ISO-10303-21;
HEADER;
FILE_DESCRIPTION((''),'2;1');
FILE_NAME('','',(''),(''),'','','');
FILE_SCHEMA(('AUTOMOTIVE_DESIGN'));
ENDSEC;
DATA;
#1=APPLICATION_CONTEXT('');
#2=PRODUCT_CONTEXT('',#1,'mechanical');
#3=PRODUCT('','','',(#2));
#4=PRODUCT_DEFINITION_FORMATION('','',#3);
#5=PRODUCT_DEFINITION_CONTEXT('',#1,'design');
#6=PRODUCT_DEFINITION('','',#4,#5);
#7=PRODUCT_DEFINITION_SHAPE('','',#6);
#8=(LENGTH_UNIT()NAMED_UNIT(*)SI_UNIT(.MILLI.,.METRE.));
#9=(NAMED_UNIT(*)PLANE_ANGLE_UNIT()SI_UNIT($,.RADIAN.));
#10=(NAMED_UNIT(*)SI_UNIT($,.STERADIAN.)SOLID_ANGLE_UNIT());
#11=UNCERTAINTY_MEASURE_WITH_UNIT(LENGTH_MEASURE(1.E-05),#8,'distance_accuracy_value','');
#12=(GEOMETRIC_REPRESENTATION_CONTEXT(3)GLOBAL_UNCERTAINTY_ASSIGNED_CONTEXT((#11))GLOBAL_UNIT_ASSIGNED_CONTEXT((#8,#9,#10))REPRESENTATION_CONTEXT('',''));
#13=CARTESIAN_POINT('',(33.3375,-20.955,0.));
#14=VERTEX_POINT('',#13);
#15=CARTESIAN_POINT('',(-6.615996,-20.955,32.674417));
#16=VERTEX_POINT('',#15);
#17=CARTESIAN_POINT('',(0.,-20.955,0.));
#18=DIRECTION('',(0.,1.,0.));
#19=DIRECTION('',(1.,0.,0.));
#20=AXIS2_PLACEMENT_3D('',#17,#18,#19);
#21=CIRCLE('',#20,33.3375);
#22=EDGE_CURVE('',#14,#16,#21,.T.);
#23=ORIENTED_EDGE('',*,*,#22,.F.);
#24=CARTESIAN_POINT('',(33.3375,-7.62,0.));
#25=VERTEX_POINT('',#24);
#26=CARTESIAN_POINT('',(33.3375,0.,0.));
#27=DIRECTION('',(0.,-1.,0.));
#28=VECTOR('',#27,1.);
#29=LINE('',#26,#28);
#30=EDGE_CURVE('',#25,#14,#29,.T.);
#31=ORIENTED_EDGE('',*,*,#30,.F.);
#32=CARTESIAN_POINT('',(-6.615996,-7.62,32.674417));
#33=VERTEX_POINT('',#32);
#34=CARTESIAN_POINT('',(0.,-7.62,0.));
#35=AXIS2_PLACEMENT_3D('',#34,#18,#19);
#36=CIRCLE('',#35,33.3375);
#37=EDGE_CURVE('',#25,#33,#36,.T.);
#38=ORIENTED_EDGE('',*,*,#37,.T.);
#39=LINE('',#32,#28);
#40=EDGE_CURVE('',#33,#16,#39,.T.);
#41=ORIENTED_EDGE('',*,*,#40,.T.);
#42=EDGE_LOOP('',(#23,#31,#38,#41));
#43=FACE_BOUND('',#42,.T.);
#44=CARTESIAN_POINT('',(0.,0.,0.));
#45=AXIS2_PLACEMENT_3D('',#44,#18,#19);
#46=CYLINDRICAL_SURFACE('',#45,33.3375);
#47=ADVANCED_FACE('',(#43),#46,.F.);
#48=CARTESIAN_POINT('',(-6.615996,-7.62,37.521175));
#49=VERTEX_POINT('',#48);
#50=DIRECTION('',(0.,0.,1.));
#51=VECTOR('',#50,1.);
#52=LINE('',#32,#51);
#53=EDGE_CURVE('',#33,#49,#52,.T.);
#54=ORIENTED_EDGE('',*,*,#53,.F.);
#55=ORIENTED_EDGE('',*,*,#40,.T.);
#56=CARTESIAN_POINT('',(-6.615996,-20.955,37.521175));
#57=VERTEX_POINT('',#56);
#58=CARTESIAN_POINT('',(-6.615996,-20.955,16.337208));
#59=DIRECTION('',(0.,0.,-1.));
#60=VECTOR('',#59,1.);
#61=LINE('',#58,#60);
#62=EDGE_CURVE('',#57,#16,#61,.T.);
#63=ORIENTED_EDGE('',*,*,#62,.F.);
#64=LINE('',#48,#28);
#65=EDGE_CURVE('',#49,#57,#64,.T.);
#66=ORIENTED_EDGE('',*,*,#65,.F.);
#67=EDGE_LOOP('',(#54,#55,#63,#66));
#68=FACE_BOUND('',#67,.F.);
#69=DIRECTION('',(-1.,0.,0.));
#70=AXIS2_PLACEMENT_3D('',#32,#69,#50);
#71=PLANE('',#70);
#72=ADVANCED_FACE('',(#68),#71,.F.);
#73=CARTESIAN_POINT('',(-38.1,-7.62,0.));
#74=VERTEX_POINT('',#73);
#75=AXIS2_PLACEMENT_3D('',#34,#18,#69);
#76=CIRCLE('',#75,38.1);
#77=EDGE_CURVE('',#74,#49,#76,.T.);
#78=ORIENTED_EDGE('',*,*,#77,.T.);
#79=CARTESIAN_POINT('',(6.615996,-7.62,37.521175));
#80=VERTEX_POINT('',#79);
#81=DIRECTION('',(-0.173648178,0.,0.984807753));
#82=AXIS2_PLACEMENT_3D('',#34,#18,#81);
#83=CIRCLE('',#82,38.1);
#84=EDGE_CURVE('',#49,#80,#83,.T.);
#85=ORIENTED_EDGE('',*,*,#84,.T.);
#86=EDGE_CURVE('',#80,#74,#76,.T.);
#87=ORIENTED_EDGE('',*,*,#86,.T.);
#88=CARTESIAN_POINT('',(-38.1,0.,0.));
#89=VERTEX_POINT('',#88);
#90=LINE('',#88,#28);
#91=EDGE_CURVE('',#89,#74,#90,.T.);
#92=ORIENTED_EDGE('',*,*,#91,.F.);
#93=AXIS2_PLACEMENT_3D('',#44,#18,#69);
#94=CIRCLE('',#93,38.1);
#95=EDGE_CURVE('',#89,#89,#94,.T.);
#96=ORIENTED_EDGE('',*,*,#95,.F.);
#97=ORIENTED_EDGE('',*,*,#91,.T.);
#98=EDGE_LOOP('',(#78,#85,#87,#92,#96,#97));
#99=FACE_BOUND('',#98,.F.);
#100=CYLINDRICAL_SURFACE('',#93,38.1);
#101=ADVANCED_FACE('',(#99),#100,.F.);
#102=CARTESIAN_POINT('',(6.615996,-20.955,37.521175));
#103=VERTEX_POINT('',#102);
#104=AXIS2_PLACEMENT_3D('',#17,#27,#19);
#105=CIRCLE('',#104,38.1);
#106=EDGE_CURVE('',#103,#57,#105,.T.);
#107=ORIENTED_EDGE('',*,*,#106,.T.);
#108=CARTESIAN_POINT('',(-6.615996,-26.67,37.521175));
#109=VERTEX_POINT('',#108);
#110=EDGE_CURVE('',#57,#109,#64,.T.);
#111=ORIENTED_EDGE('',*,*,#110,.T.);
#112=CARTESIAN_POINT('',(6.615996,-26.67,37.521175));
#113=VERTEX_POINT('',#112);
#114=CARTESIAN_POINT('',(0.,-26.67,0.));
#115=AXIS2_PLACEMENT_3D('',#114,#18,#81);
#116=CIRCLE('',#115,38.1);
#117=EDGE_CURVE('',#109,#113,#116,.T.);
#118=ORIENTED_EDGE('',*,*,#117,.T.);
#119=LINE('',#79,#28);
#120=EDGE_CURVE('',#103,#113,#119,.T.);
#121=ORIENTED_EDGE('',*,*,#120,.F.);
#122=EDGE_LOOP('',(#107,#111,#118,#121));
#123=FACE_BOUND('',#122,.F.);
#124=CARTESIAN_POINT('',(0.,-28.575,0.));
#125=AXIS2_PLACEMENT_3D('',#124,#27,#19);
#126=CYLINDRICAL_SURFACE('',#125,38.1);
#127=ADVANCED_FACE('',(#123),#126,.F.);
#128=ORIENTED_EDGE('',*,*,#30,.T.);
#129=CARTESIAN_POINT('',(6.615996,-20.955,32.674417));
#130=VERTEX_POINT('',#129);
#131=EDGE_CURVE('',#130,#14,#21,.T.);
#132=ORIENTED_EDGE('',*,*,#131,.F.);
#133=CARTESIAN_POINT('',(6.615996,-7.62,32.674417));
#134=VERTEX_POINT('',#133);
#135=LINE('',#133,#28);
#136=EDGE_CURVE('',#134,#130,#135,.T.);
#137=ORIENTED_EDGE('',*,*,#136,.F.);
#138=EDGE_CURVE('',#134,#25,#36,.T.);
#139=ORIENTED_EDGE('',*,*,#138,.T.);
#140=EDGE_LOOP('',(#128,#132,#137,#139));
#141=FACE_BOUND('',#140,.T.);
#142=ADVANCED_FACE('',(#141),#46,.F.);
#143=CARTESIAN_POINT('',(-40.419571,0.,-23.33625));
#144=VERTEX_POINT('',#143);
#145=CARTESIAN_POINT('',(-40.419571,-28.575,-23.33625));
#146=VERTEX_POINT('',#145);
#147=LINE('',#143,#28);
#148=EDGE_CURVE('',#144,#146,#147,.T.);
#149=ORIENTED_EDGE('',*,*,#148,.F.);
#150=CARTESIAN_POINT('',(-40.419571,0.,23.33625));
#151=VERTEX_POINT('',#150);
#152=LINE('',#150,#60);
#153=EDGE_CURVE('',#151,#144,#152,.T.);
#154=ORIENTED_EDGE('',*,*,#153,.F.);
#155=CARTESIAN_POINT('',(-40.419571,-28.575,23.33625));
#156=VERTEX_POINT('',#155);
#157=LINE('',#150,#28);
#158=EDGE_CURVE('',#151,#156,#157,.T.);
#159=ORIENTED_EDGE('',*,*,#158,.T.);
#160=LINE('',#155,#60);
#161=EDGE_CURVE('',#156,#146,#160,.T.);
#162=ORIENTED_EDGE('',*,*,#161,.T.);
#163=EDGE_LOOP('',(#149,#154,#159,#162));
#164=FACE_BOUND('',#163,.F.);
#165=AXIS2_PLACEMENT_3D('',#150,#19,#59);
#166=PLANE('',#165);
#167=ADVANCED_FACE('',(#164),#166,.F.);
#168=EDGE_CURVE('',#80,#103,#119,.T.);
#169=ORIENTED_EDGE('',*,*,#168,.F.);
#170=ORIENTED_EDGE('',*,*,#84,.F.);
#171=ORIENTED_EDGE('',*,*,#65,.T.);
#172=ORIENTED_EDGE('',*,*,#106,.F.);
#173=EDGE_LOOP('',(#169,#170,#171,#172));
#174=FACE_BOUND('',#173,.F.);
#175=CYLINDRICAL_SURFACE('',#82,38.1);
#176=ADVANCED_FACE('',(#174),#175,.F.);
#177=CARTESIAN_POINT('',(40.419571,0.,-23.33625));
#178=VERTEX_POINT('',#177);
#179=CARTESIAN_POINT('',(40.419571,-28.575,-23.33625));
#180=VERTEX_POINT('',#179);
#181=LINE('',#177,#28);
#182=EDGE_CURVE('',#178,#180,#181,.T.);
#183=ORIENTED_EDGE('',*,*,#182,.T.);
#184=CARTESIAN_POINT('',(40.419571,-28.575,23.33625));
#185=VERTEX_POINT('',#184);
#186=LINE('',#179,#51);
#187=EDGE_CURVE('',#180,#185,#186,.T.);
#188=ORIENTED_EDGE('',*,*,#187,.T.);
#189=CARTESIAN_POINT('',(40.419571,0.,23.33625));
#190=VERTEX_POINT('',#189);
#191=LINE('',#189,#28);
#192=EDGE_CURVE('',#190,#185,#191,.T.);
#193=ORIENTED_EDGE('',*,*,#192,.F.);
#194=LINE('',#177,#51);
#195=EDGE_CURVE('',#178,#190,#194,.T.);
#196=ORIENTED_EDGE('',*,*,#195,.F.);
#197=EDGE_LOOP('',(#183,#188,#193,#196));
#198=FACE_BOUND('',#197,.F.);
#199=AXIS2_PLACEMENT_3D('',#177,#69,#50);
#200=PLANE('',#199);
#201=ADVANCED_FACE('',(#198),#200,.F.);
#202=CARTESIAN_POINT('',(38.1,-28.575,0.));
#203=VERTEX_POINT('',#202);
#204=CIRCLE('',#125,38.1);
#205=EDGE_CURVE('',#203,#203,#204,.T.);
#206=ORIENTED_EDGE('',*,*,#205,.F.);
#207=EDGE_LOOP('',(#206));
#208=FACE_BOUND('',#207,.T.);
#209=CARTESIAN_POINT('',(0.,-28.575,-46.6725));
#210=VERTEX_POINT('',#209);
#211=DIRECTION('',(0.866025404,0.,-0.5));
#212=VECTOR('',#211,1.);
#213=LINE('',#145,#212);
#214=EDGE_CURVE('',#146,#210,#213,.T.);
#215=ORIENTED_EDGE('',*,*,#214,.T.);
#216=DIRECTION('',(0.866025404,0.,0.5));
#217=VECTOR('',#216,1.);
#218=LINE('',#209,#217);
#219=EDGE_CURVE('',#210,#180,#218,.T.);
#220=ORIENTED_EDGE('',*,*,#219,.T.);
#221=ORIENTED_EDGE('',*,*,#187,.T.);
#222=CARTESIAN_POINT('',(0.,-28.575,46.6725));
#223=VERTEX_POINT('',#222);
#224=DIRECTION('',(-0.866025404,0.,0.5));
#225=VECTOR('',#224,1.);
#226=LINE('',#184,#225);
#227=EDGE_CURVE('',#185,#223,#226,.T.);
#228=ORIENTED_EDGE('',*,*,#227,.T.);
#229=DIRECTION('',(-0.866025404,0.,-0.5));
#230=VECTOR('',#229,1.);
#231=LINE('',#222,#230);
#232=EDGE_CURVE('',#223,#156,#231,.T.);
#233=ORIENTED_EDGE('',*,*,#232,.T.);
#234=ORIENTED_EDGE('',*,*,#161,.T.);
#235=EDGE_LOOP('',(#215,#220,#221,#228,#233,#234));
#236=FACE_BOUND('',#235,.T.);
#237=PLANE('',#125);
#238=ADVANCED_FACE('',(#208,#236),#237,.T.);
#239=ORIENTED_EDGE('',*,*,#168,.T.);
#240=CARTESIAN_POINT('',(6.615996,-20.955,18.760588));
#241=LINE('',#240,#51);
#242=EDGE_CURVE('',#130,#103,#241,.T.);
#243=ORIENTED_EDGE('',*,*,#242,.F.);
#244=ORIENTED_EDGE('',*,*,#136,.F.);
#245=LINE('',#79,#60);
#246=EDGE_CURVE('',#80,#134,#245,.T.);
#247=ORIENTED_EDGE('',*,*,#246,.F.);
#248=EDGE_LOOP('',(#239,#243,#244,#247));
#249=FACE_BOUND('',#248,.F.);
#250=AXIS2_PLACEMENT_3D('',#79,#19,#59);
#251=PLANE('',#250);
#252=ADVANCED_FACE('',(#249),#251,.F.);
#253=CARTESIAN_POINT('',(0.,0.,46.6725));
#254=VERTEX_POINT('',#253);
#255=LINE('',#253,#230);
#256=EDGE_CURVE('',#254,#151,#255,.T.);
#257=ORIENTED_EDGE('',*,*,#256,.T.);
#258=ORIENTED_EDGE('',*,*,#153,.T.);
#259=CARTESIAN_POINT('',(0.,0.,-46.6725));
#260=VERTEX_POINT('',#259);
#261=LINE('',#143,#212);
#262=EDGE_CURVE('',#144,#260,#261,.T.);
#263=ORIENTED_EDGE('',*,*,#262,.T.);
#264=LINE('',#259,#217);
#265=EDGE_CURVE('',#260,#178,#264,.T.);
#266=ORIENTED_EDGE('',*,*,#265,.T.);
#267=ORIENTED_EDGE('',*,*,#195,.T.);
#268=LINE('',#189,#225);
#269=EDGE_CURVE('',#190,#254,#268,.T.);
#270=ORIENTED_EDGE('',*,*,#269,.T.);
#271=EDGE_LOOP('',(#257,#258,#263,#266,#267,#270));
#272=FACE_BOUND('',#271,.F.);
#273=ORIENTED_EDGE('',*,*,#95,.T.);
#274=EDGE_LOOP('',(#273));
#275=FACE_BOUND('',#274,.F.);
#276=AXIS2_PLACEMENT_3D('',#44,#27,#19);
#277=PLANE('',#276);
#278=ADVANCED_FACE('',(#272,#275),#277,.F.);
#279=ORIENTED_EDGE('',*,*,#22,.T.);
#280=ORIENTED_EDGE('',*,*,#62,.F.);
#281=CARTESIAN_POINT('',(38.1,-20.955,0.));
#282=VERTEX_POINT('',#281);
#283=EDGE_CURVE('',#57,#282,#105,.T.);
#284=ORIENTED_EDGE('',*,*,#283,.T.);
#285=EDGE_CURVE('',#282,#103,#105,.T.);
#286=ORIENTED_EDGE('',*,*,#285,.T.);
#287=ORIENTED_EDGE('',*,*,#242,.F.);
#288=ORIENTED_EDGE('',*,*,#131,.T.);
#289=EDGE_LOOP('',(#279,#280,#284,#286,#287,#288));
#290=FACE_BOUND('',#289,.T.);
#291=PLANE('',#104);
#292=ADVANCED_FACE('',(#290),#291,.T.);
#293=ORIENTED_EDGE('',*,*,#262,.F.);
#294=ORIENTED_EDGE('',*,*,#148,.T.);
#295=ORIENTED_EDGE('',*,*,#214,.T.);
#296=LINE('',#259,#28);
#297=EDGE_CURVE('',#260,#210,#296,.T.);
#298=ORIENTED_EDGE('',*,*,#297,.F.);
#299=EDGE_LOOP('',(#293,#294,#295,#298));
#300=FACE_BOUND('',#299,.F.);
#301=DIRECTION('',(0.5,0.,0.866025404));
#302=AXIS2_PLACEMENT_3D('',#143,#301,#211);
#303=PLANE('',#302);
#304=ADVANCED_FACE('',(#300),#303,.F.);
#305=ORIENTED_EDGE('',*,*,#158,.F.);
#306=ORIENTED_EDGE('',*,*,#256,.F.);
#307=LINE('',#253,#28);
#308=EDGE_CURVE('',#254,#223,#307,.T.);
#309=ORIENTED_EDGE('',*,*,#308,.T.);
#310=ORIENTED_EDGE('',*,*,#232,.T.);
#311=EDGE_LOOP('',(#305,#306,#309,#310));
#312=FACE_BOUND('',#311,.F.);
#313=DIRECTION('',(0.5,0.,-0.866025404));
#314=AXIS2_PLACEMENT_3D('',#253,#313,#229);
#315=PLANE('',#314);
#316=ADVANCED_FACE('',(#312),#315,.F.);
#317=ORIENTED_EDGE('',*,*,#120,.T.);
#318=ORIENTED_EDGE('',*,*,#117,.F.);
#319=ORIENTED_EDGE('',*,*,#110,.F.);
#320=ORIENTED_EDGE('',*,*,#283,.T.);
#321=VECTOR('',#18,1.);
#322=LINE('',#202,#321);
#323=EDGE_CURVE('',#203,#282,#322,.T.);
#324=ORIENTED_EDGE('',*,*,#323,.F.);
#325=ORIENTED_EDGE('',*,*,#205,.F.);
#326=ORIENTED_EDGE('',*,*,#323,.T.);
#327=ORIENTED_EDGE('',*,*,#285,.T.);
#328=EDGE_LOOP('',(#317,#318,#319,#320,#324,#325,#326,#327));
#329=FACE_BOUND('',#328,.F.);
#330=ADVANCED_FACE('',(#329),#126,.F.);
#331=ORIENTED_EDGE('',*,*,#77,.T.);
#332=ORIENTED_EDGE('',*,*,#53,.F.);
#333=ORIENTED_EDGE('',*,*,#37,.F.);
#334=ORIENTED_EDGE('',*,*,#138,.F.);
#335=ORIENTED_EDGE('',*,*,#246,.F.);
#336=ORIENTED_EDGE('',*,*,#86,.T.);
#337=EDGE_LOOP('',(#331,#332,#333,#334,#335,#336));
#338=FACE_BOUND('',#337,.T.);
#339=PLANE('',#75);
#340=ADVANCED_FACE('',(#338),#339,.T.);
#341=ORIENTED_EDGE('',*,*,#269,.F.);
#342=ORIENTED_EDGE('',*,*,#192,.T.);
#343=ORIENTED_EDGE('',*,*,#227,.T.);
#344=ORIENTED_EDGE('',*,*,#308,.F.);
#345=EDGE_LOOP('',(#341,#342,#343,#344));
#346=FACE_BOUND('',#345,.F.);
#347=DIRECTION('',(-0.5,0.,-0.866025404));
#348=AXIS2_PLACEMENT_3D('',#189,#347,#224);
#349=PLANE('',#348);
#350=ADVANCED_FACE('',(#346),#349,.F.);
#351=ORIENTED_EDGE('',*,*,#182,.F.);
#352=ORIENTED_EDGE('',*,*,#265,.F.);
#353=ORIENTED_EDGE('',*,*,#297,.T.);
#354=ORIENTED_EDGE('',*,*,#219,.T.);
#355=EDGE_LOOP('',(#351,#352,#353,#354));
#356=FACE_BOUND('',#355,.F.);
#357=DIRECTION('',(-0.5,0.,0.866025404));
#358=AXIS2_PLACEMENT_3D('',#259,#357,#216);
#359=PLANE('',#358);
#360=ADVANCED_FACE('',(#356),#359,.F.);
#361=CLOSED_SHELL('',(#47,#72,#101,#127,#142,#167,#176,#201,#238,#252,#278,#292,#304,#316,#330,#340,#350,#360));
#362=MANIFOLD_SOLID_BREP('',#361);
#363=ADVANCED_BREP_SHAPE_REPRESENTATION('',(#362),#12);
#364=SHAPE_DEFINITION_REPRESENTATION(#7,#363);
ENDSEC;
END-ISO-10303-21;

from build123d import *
from build123d import SkipClean  # not in build123d's __all__

# Parameters (mm, degrees)
F0_R     = 44.45
F1_DEPTH = 38.1
F2_R     = 50.8
F3_DEPTH = 10.16
F4_R     = 50.8
F5_DEPTH = 10.16
F7_DEPTH = 25.4
F8_SCALE = 0.75


with BuildPart() as f1:
    # F0 (on Front) → F1 (new body)
    with BuildSketch(Plane.XZ):
        Polygon((53.8927608775, 31.115), (0, 62.23), (-53.8927608775, 31.115), (-53.8927608775, -31.115), (0, -62.23), (53.8927608775, -31.115), align=None)
        Circle(F0_R, mode=Mode.SUBTRACT)
    extrude(amount=F1_DEPTH)

    # F2 (on face) → F3 (cut)
    with BuildSketch(Plane.XZ.offset(38.1)):
        Circle(F2_R)
    extrude(amount=-F3_DEPTH, mode=Mode.SUBTRACT)

    # F4 (on face) → F5 (cut)
    with BuildSketch(Plane(origin=(0, 0, 0), x_dir=(-1, 0, 0), z_dir=(0, 1, 0))):
        Circle(F4_R)
    extrude(amount=-F5_DEPTH, mode=Mode.SUBTRACT)

    # F6 (on face) → F7 (cut)
    with BuildSketch(Plane(origin=(0, -10.16, 0), x_dir=(-1, 0, 0), z_dir=(0, 1, 0))):
        with BuildLine():
            Line((7.7186614973, 43.7747046214), (8.8213274255, 50.028233853))
            ThreePointArc((8.8213274255, 50.028233853), (0, 50.8), (-8.8213274255, 50.028233853))
            Line((-8.8213274255, 50.028233853), (-7.7186614973, 43.7747046214))
            ThreePointArc((-7.7186614973, 43.7747046214), (0, 44.45), (7.7186614973, 43.7747046214))
        make_face()
        with BuildLine():
            Line((-7.7186614973, 43.7747046214), (-8.8213274255, 50.028233853))
            Line((-8.8213274255, 50.028233853), (-8.8213274255, 43.5658889781))
            ThreePointArc((-8.8213274255, 43.5658889781), (-8.2706535041, 43.6737769218), (-7.7186614973, 43.7747046214))
        make_face()
        with BuildLine():
            Line((8.8213274255, 43.5658889781), (8.8213274255, 50.028233853))
            Line((8.8213274255, 50.028233853), (7.7186614973, 43.7747046214))
            ThreePointArc((7.7186614973, 43.7747046214), (8.2706535041, 43.6737769218), (8.8213274255, 43.5658889781))
        make_face()
    with SkipClean():  # cleaning this boolean's faces spoils the solid; the shape is the same uncleaned
        extrude(amount=-F7_DEPTH, mode=Mode.SUBTRACT)


with BuildPart() as f1_1:
    # F8: moved
    add(f1.part.scale(F8_SCALE), clean=False)


solid = f1_1.part
